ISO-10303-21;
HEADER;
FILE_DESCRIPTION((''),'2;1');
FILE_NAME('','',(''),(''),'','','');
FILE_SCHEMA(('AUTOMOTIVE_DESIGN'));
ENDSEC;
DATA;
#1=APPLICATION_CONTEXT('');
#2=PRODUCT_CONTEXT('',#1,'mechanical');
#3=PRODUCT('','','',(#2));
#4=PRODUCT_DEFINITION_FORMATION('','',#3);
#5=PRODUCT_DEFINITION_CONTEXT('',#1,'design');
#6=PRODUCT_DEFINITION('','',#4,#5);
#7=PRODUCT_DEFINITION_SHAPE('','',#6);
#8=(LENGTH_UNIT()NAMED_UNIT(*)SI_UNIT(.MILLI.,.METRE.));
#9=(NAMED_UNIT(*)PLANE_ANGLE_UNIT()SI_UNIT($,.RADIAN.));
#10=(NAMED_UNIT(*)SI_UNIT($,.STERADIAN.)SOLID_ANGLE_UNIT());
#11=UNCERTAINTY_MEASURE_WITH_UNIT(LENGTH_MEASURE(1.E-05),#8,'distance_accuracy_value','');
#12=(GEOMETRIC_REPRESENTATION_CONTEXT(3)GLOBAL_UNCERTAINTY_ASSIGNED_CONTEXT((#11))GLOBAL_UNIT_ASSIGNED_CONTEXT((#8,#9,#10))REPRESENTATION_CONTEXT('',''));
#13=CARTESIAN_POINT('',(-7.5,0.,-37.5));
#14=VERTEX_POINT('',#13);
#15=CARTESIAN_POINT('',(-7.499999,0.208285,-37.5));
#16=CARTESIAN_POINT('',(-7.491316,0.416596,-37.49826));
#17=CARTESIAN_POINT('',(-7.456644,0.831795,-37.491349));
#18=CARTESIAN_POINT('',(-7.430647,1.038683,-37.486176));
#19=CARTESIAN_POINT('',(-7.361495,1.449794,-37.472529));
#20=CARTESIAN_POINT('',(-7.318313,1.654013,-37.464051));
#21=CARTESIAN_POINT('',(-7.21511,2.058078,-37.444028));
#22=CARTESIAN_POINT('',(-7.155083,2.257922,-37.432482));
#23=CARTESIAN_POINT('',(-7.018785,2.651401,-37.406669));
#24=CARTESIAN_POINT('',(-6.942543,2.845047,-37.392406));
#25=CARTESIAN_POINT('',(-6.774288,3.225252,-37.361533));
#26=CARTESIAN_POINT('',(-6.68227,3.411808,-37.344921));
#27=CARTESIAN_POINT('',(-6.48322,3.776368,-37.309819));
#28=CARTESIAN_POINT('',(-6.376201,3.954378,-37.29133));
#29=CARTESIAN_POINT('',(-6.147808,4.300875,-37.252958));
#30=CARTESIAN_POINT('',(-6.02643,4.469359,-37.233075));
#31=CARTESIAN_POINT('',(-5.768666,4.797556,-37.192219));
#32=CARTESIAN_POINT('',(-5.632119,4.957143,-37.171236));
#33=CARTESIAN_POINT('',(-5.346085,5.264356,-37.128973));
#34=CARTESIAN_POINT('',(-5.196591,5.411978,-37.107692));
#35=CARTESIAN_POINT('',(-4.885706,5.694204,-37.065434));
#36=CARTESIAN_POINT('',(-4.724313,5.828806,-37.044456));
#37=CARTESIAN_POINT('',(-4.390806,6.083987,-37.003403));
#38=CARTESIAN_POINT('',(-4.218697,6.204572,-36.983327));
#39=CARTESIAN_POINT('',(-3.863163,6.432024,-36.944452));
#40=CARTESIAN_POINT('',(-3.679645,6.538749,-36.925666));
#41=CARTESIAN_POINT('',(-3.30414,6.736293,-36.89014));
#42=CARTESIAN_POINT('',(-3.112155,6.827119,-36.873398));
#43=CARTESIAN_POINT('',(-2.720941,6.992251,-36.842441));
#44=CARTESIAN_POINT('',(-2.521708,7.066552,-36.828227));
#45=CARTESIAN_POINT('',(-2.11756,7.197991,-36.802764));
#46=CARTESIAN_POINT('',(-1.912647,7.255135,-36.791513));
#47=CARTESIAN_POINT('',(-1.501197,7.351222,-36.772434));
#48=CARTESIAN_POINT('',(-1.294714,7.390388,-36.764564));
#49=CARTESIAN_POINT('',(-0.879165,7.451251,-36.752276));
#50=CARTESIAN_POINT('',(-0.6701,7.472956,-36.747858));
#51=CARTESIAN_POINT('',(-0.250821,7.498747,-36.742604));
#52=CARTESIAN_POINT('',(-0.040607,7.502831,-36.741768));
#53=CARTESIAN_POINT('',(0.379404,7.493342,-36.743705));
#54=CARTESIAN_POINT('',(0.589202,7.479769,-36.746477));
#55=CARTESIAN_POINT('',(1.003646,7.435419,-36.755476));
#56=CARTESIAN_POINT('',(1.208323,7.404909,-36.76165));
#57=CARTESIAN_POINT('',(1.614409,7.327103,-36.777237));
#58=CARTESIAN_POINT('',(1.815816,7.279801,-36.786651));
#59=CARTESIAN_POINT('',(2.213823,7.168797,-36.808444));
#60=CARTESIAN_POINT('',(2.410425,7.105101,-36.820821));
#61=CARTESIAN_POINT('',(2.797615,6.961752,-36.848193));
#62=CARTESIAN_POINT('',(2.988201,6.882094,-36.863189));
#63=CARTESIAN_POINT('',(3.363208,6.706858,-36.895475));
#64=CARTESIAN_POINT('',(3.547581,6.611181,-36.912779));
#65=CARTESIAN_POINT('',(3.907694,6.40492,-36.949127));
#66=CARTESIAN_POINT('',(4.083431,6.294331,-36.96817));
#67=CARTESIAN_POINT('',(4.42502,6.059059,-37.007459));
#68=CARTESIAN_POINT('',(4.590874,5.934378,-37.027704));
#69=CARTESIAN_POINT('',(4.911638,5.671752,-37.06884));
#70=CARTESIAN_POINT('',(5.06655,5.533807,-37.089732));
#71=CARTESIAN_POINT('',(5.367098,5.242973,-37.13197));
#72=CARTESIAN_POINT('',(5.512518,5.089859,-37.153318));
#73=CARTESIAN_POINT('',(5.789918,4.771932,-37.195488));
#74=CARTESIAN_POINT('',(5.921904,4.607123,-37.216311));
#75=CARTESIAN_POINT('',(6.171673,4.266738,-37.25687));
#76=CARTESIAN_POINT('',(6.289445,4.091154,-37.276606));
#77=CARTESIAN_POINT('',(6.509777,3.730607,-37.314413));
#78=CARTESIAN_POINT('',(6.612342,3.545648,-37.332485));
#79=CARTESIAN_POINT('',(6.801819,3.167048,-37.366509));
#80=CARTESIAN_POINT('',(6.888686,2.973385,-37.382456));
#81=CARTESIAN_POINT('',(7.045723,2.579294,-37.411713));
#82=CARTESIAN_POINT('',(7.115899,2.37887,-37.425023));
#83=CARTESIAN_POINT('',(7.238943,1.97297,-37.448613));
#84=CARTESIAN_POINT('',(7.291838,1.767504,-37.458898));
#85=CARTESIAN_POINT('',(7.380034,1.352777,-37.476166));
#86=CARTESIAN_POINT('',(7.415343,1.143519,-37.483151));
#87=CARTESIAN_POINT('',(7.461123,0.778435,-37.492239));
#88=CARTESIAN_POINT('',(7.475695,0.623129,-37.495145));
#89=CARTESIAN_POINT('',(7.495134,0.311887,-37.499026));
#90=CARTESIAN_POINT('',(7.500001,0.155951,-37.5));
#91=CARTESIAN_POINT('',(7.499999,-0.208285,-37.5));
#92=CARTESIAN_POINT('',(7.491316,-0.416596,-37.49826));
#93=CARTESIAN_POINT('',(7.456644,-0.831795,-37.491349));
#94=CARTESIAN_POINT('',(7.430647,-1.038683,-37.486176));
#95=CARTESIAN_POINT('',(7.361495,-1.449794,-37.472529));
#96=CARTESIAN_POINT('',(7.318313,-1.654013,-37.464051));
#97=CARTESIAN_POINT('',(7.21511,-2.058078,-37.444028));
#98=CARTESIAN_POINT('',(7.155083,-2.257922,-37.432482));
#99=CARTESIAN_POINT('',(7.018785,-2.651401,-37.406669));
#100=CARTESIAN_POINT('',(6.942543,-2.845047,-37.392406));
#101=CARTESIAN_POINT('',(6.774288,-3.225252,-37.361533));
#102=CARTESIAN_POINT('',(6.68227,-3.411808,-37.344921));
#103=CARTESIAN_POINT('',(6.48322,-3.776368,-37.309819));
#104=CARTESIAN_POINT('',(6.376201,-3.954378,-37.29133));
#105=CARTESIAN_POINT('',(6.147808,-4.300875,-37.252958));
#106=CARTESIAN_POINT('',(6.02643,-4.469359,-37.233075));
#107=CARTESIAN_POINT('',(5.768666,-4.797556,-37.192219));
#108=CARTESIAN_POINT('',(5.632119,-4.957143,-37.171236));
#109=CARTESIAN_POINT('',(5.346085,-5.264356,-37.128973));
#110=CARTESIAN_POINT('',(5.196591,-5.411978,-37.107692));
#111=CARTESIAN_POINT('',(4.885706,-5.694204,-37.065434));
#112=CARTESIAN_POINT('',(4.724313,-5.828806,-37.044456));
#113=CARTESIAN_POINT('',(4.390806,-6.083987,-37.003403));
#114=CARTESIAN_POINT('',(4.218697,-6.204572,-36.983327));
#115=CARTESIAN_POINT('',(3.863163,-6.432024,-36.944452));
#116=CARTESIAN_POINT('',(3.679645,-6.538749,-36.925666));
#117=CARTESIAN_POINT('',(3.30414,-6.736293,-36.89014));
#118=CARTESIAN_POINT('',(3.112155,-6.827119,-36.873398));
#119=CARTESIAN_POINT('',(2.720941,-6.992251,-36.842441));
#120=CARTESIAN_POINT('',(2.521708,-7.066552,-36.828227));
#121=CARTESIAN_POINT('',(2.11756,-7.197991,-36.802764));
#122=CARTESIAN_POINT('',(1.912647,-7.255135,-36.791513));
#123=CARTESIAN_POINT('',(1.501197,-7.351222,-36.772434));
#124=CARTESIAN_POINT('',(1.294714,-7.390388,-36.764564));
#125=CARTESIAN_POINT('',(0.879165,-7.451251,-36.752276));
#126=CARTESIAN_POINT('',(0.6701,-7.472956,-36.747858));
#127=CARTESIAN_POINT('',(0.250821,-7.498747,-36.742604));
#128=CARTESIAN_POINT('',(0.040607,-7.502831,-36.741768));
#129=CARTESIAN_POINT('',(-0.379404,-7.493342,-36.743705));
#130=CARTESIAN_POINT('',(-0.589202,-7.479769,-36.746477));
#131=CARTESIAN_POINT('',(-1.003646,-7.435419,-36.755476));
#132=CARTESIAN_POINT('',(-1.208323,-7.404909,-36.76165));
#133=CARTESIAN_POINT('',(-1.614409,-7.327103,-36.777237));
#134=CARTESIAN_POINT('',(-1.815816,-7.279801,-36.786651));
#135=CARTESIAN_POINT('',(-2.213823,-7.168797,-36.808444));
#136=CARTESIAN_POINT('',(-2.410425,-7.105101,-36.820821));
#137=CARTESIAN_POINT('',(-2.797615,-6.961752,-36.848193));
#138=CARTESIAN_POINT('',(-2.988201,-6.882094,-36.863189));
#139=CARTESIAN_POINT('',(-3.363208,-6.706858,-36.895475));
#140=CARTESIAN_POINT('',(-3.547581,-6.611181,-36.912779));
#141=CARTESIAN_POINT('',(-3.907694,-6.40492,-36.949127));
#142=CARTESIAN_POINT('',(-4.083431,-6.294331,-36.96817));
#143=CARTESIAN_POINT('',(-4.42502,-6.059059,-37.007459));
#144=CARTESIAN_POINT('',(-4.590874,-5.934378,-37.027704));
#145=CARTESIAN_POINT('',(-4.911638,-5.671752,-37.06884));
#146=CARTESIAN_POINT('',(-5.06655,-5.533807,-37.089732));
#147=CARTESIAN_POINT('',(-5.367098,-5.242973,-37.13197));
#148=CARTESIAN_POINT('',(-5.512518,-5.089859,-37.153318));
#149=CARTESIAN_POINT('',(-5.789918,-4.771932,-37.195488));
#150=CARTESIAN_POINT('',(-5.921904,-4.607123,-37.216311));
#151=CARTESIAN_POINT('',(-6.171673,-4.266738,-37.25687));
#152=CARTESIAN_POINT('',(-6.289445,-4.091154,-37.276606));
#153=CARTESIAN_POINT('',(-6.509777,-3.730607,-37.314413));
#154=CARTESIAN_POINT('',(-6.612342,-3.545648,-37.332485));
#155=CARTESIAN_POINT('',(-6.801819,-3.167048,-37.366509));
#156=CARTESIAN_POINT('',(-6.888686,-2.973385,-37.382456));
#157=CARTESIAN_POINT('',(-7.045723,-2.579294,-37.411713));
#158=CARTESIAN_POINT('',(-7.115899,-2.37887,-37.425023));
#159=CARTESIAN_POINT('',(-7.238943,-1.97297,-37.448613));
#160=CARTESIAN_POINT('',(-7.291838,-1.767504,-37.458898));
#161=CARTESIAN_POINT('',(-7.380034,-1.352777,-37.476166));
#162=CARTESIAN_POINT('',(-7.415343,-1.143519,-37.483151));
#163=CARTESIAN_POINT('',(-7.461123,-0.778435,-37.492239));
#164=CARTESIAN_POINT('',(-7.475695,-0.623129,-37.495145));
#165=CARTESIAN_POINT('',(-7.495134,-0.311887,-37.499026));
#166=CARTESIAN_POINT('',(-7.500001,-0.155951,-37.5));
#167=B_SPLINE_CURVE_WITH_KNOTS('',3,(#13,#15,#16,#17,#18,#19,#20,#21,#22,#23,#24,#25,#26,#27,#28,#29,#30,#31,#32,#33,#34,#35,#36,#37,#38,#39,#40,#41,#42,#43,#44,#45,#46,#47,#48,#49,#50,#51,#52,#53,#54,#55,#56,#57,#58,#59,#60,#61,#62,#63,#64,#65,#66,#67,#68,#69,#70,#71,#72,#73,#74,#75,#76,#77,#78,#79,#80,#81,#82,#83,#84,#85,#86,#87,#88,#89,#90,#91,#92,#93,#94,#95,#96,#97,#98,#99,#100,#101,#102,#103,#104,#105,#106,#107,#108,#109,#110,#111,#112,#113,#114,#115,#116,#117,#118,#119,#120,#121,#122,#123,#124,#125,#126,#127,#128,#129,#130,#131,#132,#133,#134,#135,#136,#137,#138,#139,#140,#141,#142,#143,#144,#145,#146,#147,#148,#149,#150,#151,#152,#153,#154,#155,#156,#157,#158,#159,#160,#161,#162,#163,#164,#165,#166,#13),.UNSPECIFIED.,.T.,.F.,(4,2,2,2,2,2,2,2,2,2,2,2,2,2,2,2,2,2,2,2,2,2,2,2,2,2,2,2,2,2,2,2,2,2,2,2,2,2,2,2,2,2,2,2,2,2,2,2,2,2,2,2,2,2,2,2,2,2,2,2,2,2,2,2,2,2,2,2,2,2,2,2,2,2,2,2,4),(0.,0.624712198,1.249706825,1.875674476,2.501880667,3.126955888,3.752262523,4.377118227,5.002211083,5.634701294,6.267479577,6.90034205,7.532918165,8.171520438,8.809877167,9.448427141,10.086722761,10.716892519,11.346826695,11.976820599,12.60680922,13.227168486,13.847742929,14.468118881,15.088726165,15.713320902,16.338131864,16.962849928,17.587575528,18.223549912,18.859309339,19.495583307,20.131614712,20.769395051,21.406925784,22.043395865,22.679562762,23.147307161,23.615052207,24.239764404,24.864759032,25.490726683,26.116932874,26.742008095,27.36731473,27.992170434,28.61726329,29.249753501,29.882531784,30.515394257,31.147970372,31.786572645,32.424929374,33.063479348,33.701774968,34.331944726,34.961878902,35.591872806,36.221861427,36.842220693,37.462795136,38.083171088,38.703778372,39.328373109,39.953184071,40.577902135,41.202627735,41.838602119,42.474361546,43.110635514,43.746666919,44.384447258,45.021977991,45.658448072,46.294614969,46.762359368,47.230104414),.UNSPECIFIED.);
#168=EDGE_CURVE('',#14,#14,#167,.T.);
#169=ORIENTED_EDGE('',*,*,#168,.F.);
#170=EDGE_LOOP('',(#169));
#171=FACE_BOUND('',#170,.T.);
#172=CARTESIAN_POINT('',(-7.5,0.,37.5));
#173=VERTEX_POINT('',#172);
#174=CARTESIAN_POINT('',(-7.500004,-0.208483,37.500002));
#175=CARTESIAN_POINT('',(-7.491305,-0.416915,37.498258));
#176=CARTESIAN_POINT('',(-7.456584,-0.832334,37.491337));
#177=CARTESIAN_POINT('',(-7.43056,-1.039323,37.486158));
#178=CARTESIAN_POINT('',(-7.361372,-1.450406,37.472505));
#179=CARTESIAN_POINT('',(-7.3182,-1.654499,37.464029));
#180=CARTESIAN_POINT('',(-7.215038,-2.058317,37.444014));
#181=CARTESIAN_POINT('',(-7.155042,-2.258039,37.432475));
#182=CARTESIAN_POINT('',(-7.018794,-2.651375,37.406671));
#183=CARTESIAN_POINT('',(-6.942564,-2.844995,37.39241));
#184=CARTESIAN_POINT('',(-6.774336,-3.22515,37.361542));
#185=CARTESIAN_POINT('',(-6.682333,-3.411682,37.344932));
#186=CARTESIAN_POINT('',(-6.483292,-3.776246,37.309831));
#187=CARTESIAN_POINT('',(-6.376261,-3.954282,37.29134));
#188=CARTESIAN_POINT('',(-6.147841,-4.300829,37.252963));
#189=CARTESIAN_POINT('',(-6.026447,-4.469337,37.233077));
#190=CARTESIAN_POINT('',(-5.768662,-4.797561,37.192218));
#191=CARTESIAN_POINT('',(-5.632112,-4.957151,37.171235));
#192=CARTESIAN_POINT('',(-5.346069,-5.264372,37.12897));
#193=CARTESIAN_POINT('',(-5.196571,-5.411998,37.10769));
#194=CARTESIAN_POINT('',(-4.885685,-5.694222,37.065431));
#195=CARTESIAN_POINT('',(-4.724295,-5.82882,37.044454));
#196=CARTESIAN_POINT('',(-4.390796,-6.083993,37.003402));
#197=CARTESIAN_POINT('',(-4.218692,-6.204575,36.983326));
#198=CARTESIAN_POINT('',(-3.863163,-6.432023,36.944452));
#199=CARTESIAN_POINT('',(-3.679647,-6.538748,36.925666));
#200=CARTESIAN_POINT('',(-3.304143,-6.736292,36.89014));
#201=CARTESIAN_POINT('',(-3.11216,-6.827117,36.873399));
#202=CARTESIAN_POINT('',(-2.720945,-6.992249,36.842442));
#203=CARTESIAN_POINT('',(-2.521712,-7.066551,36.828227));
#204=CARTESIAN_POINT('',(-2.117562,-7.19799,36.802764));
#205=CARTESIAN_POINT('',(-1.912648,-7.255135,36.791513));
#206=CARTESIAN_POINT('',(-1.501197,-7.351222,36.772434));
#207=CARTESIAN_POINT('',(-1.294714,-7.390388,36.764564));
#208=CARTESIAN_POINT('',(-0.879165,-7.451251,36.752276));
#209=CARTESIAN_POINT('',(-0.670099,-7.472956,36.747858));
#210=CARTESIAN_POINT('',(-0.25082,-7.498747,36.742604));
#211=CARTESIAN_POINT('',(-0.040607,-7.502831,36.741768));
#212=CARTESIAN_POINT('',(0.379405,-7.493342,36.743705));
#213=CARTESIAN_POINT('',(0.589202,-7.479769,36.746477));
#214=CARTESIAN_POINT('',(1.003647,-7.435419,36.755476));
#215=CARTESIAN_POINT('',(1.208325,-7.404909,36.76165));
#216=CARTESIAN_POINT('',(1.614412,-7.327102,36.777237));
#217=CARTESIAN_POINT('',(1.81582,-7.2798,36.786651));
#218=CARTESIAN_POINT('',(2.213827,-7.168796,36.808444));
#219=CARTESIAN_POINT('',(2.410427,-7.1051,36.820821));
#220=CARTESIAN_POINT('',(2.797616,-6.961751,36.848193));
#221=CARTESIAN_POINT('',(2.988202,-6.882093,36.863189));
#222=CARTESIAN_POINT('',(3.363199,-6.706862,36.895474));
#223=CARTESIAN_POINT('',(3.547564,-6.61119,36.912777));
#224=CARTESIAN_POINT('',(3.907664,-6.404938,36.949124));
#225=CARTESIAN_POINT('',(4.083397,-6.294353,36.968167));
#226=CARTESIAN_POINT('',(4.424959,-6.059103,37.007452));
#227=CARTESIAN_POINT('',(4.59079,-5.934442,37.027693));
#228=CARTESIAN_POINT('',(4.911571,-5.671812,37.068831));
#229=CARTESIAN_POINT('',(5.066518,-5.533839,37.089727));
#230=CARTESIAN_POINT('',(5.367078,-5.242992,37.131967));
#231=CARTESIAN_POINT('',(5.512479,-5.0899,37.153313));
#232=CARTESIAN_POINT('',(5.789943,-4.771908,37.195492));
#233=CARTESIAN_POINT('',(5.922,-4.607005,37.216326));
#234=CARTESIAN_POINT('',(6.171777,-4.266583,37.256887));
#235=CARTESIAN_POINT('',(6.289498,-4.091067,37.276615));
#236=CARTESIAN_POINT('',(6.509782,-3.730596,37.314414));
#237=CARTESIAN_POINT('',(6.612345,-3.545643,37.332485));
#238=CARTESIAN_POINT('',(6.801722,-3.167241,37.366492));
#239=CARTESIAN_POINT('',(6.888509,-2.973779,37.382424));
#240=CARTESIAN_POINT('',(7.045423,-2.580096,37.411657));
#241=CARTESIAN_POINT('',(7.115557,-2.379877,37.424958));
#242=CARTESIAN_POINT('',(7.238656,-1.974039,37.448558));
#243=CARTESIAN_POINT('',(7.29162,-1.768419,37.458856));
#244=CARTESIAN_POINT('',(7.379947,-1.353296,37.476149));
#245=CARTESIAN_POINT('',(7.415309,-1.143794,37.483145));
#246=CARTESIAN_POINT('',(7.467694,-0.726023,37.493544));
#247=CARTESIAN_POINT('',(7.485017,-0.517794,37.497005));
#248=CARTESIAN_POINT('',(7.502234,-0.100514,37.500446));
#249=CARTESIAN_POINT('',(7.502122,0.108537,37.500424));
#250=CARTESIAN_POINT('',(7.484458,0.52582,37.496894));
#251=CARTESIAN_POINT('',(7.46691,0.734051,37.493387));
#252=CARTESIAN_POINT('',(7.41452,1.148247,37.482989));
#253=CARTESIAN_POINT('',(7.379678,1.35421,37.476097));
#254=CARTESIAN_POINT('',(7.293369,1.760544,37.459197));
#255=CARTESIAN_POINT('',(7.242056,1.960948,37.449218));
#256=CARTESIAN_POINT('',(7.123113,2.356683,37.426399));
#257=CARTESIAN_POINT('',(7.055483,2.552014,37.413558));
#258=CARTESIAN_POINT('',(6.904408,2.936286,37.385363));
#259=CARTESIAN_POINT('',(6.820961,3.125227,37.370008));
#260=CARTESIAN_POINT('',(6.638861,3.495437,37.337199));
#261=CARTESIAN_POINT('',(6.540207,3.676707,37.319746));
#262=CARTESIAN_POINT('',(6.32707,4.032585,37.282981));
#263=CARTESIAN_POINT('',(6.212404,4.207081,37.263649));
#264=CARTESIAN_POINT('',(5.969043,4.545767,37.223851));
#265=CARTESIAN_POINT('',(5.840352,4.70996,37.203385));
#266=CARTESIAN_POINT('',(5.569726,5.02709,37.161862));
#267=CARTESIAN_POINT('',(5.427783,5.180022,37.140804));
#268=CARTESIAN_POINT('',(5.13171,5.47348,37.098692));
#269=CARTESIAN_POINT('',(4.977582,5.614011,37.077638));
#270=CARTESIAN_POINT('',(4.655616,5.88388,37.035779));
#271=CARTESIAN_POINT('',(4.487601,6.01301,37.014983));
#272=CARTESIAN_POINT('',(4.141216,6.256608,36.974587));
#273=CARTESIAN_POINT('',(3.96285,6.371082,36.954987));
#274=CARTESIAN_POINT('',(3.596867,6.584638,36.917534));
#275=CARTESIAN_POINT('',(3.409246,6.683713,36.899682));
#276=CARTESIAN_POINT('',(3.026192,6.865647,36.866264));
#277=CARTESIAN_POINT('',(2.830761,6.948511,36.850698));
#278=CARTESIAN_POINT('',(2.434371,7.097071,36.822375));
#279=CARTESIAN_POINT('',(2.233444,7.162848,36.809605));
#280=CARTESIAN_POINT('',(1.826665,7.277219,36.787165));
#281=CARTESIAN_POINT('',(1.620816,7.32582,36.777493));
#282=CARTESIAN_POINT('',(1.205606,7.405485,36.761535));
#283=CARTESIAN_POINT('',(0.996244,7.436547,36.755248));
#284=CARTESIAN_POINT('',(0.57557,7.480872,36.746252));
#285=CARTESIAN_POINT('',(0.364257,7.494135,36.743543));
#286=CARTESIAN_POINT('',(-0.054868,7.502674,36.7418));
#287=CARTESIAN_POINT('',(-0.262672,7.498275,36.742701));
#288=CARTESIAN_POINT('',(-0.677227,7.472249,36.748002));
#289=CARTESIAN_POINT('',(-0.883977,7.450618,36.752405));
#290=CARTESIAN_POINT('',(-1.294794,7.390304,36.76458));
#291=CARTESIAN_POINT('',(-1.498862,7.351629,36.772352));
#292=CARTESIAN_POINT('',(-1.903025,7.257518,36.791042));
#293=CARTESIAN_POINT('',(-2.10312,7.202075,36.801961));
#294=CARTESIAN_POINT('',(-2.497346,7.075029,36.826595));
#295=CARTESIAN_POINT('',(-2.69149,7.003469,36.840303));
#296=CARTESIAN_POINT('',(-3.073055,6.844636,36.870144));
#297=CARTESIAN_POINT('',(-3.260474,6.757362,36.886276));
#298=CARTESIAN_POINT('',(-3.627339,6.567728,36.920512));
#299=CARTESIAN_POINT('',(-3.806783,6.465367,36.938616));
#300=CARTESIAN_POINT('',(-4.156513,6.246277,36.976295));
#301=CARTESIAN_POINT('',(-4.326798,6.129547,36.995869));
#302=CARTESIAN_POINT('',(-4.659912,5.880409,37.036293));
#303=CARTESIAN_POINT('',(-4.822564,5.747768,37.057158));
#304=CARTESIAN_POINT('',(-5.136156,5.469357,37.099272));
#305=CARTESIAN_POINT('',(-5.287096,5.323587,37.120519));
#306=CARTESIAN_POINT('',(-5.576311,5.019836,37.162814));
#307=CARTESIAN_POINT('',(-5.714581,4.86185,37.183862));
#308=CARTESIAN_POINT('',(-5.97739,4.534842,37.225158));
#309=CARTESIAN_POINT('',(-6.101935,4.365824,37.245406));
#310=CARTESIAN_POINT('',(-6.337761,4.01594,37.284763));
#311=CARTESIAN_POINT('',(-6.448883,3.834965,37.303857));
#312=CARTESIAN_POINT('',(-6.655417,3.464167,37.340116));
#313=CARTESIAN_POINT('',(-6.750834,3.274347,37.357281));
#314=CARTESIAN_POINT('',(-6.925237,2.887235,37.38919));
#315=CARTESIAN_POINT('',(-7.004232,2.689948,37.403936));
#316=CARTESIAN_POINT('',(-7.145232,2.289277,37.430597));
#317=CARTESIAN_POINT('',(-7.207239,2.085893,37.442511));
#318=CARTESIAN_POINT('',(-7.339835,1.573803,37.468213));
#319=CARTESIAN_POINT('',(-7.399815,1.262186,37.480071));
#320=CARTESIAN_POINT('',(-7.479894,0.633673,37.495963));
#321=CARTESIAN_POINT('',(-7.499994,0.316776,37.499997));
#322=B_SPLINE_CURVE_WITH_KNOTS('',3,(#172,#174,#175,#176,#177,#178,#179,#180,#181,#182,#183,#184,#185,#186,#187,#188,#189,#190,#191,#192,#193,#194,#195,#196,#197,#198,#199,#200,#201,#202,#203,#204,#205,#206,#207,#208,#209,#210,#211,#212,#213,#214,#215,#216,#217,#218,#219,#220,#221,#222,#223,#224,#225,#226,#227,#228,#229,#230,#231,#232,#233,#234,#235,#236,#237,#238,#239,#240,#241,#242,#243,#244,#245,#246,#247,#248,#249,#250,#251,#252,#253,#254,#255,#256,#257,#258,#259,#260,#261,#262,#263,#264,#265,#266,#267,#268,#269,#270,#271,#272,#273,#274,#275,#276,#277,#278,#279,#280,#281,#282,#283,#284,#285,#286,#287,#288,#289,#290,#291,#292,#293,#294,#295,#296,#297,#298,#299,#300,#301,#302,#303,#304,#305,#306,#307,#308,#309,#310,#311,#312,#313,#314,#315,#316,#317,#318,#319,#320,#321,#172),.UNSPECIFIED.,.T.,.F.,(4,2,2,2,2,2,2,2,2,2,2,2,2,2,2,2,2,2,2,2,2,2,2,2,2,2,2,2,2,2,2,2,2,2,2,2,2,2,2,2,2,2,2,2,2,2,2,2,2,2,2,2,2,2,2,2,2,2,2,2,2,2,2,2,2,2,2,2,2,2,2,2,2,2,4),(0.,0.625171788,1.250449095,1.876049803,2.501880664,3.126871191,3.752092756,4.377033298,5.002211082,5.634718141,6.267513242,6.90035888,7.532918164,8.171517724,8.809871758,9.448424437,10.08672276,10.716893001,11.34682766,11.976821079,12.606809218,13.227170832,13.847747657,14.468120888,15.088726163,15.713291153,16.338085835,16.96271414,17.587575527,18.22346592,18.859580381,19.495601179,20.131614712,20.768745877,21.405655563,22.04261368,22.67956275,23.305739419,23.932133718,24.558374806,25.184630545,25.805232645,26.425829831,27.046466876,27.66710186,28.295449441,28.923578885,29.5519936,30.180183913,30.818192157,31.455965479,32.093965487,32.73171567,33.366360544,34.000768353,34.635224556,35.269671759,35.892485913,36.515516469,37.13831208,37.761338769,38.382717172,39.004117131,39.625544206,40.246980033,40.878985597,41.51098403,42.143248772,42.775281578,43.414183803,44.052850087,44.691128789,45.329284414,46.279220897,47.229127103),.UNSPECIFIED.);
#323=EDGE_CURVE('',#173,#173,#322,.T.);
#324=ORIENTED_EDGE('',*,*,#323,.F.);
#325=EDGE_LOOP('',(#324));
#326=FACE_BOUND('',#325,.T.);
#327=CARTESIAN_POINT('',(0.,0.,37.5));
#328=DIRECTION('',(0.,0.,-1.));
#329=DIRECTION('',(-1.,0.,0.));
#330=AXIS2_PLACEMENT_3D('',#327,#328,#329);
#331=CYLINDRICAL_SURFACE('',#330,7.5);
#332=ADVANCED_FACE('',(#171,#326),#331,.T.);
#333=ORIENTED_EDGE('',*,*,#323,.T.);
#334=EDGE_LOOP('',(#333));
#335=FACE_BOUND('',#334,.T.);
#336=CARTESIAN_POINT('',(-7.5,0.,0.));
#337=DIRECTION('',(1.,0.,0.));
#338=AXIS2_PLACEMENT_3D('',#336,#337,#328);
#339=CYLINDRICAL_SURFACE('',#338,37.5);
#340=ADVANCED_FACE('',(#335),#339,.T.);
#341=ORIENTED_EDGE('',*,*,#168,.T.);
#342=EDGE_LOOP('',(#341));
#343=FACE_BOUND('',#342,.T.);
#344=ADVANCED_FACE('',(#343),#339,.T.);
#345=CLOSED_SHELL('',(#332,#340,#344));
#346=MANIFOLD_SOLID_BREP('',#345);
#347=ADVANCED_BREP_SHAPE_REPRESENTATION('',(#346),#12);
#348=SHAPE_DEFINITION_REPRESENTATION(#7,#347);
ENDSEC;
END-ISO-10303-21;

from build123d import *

# Parameters (mm, degrees)
SKETCH1_R           = 7.5
BOSS_EXTRUDE1_DEPTH = 37.5
CUT_EXTRUDE2_START  = -9
CUT_EXTRUDE2_DEPTH  = 17


with BuildPart() as part:
    # Sketch1 → Boss-Extrude1 (new, symmetric)
    with BuildSketch(Plane.XY):
        Circle(SKETCH1_R)
    extrude(amount=BOSS_EXTRUDE1_DEPTH, both=True)

    # Cut-Extrude2: read off the stored shape, not the designer's step
    # Cut-Extrude2 outline → Cut-Extrude2 (cut)
    with BuildSketch(Plane(origin=(0, 0, 0), x_dir=(0, 0, -1), z_dir=(1, 0, 0)).offset(CUT_EXTRUDE2_START)):
        with BuildLine():
            ThreePointArc((37.5, 0), (37.310078961, -3.769351124), (36.742239579, -7.50052203))
            Line((36.742239579, -7.50052203), (36.640276673, -8))
            Line((36.640276673, -8), (37.5, -8))
            Line((37.5, -8), (37.5, 0))
        make_face()
        with BuildLine():
            ThreePointArc((36.742239579, 7.50052203), (37.310078961, 3.769351124), (37.5, 0))
            Line((37.5, 0), (37.5, 8))
            Line((37.5, 8), (36.640276673, 8))
            Line((36.640276673, 8), (36.742239579, 7.50052203))
        make_face()
        with BuildLine():
            Line((-37.5, -8), (-36.640276673, -8))
            Line((-36.640276673, -8), (-36.742239584, -7.500522004))
            ThreePointArc((-36.742239584, -7.500522004), (-37.310078963, -3.769351111), (-37.5, 0))
            Line((-37.5, 0), (-37.5, -8))
        make_face()
        with BuildLine():
            Line((-36.742239545, 7.500522195), (-36.64027667, 8))
            Line((-36.64027667, 8), (-37.5, 8))
            Line((-37.5, 8), (-37.5, 0))
            ThreePointArc((-37.5, 0), (-37.310078953, 3.769351208), (-36.742239545, 7.500522195))
        make_face()
    extrude(amount=CUT_EXTRUDE2_DEPTH, mode=Mode.SUBTRACT)


solid = part.part
